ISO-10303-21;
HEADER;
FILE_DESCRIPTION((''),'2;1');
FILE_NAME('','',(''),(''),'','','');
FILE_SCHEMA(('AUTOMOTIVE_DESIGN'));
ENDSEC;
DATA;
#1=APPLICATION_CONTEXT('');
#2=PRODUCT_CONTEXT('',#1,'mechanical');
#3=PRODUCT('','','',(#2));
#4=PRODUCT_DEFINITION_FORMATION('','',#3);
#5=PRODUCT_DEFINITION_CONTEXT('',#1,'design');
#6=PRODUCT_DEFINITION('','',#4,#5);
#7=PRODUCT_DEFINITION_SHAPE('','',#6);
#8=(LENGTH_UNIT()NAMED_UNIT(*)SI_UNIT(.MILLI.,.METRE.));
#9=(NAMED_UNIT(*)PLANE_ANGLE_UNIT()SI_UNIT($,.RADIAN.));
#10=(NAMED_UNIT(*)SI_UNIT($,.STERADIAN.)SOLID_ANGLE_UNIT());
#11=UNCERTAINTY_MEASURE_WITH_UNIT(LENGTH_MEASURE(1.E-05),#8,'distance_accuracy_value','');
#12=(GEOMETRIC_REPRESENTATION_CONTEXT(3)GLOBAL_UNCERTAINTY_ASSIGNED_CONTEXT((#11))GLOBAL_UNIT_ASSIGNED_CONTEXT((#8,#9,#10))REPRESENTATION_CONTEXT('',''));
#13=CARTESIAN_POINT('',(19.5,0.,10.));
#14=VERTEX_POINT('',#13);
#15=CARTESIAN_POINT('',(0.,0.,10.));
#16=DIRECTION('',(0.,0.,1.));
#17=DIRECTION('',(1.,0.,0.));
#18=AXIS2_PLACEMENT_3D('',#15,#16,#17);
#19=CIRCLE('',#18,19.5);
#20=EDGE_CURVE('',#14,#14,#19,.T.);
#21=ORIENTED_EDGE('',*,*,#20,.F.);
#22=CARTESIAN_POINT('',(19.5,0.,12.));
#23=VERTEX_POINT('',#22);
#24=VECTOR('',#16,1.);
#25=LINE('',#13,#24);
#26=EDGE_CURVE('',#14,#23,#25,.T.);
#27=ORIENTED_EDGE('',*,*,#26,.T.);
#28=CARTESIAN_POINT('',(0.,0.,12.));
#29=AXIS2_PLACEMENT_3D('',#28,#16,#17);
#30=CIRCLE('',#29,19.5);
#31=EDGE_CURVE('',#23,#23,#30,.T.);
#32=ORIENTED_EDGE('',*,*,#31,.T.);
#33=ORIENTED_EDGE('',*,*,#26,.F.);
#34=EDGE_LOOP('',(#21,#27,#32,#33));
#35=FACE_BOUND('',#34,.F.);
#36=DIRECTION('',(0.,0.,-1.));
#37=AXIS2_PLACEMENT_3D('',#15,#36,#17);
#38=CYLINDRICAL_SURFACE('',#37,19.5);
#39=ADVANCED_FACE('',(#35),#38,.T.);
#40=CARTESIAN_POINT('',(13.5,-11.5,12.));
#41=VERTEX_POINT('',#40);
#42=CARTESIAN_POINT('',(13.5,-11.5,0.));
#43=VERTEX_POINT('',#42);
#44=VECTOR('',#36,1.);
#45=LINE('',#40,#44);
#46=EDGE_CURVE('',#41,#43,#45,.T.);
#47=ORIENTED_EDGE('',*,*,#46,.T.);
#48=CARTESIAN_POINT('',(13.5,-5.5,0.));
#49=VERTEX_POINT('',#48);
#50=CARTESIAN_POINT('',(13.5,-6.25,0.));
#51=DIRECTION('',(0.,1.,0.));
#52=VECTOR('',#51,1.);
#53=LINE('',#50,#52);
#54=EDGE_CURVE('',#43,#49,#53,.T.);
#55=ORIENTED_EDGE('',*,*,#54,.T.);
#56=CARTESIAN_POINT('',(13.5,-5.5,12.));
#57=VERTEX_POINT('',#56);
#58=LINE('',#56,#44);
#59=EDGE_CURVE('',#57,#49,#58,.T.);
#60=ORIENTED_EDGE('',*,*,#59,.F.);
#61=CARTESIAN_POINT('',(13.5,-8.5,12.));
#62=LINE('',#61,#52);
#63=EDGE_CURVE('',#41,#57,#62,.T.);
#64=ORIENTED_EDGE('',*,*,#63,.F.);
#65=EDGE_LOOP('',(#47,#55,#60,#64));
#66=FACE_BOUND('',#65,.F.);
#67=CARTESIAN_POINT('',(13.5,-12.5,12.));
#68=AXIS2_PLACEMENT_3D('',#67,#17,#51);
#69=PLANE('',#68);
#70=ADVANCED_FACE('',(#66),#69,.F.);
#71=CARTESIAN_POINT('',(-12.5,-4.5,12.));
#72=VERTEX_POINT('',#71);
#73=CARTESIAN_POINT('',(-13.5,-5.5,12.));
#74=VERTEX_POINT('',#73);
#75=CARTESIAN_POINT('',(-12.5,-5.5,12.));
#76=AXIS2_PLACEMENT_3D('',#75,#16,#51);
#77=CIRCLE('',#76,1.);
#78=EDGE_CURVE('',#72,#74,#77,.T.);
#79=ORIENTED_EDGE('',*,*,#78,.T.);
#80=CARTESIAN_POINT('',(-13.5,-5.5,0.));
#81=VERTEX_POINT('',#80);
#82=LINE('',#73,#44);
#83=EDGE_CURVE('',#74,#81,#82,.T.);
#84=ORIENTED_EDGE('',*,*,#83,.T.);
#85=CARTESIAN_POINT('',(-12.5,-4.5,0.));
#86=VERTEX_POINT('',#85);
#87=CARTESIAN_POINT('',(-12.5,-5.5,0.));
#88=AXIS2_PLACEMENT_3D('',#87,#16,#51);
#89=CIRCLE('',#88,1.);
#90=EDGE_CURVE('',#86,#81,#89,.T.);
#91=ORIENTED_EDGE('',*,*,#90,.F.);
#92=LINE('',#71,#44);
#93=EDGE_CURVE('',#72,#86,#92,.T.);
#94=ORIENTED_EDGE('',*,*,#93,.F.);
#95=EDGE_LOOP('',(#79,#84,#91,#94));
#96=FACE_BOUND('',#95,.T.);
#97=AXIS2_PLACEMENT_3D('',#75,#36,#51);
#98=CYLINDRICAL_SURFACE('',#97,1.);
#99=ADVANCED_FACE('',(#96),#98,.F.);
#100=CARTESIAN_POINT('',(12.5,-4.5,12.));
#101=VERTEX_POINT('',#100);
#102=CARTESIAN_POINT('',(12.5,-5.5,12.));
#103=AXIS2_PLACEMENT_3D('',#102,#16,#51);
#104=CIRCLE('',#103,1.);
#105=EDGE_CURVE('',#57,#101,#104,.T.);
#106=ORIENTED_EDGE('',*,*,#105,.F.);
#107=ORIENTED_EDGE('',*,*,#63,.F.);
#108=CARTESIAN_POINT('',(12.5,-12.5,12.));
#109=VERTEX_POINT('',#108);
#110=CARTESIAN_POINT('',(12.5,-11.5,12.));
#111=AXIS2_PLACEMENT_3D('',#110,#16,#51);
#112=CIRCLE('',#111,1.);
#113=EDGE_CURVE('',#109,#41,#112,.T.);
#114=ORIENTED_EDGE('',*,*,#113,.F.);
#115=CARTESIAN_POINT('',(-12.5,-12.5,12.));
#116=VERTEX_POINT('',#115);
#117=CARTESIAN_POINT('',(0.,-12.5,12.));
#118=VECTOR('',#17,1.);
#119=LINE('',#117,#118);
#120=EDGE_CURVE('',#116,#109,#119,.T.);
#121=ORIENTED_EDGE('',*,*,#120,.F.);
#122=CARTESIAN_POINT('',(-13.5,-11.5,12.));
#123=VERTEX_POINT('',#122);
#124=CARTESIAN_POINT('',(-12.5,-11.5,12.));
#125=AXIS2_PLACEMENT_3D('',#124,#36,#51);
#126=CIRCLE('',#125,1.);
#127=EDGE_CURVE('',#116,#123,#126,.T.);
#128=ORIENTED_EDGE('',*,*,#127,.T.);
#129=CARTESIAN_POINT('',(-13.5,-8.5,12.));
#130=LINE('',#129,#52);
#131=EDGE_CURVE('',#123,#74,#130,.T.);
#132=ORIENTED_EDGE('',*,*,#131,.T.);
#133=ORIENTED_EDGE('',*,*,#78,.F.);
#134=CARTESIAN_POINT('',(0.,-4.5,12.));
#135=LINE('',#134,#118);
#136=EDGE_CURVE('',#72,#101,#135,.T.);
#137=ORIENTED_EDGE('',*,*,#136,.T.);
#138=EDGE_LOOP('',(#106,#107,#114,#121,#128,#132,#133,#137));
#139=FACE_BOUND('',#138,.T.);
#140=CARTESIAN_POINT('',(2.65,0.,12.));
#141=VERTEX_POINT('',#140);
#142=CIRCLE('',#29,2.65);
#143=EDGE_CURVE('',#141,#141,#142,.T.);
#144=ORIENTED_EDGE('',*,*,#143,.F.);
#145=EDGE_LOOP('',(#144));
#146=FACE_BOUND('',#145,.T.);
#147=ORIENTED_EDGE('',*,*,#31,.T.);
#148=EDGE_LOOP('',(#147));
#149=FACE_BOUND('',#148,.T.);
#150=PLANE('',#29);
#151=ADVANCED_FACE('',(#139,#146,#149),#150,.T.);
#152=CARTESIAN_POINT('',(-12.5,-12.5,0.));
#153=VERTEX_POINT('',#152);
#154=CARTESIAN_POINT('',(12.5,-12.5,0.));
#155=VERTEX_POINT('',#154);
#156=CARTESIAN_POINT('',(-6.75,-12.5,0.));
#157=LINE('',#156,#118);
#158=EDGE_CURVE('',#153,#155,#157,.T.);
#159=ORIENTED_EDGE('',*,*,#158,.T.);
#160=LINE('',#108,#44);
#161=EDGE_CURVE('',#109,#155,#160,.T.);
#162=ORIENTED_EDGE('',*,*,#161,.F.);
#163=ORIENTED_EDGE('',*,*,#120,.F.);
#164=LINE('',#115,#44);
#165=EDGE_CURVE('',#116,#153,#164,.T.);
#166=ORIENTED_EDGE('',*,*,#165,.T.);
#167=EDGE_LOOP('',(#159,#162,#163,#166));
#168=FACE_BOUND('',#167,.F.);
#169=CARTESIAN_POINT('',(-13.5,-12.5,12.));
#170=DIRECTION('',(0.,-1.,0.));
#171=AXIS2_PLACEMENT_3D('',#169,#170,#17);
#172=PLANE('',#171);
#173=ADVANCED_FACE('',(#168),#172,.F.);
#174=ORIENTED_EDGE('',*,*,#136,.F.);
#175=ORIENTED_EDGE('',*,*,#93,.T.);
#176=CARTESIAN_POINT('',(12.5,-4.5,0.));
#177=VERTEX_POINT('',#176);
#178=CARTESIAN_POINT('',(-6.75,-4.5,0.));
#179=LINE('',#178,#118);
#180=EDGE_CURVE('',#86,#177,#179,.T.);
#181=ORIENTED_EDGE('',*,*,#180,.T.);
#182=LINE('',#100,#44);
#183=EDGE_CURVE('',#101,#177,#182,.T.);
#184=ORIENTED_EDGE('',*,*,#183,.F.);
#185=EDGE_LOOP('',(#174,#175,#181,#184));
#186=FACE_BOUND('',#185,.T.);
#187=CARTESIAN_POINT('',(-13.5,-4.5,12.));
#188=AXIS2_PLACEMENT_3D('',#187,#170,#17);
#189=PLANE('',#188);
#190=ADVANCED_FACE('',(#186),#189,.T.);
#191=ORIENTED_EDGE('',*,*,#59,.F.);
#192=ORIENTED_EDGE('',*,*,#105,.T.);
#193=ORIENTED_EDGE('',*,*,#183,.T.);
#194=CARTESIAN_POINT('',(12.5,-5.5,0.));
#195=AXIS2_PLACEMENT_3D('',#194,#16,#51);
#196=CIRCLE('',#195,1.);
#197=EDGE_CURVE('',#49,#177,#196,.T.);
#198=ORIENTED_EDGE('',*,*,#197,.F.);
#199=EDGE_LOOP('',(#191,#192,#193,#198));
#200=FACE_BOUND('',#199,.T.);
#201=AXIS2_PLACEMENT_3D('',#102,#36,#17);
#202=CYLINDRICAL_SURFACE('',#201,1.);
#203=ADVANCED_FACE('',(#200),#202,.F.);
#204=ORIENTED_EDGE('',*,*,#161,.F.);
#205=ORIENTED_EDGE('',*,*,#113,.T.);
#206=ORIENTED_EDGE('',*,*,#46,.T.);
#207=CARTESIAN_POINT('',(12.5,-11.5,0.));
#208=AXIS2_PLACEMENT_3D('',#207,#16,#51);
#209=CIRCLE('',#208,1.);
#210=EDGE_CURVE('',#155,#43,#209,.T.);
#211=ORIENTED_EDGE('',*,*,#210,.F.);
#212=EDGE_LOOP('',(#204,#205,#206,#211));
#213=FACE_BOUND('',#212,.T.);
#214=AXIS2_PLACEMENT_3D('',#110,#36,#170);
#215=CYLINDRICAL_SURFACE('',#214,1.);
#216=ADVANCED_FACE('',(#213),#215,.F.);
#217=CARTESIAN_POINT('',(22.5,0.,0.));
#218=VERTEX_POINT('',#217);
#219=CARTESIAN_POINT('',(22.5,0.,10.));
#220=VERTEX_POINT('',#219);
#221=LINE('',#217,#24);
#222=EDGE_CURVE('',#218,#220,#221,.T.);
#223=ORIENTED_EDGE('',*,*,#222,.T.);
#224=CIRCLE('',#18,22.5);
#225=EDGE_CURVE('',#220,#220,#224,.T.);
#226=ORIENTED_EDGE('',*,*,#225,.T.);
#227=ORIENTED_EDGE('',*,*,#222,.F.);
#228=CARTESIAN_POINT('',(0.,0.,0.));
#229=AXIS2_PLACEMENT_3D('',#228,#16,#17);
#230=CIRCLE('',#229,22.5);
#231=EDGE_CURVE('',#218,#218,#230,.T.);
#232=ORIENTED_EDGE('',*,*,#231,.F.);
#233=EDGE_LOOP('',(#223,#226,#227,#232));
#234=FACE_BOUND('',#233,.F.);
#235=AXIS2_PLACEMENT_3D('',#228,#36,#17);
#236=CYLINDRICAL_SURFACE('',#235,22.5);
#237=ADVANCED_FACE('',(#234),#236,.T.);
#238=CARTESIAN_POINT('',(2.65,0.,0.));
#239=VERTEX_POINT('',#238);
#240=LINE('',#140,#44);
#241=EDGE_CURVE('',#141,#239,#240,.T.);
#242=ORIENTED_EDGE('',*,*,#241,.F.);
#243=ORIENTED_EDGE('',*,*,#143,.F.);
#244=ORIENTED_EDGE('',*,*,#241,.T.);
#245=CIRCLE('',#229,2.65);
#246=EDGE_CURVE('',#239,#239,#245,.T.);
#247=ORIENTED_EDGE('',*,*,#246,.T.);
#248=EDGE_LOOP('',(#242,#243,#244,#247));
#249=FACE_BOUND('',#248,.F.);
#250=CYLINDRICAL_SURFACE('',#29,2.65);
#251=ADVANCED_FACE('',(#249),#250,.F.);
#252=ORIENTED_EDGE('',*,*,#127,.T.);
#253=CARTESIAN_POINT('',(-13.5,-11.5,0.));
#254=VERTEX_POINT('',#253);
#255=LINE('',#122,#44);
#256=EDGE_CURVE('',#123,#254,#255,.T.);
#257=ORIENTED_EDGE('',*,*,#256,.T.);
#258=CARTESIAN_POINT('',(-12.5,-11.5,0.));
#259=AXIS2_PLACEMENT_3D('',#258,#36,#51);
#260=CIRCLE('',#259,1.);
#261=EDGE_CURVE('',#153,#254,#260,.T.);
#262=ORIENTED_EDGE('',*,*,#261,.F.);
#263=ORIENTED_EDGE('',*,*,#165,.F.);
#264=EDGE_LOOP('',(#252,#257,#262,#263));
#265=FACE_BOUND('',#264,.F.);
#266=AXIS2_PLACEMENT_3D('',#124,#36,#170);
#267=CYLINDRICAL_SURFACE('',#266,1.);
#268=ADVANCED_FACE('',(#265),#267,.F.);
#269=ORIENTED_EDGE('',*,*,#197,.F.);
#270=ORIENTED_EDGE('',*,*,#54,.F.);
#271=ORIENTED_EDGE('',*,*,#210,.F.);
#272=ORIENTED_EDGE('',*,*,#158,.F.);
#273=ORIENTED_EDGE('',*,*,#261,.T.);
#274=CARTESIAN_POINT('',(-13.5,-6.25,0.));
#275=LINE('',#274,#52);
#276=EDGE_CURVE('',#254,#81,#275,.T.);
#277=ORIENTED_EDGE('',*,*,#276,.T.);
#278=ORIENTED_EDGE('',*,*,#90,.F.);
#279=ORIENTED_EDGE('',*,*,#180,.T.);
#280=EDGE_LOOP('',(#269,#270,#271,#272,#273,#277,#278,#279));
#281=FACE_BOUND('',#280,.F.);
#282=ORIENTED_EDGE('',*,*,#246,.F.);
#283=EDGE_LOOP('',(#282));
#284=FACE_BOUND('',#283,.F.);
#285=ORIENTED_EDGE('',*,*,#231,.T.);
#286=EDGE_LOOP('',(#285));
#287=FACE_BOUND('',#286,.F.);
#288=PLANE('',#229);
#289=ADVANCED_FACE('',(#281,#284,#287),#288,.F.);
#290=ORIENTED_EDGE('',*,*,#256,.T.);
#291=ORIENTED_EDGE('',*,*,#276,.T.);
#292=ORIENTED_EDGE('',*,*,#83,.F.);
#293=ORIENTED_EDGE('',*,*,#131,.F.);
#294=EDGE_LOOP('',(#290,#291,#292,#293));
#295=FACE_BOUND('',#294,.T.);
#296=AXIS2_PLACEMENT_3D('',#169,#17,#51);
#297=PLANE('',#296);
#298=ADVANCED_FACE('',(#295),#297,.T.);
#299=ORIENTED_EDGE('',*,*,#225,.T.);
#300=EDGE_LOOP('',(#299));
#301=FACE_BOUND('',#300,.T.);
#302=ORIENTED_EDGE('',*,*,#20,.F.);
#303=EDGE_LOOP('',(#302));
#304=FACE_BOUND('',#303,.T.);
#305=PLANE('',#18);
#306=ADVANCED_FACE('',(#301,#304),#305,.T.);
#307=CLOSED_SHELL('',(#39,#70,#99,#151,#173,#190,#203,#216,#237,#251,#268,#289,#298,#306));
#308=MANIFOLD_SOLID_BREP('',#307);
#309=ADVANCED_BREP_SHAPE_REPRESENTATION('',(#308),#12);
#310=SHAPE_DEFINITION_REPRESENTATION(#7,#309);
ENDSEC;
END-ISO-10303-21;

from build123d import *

# Parameters (mm, degrees)
F0_R     = 22.5
F1_DEPTH = 10
F3_R     = 19.5
F4_DEPTH = 2
F5_R     = 2.65
F5_W     = 27
F5_H     = 8
F6_DEPTH = 12.001
F8_R     = 1


with BuildPart() as f1:
    # F0 (on Top) → F1 (new body)
    with BuildSketch(Plane.XY):
        Circle(F0_R)
    extrude(amount=F1_DEPTH)

    # F3 (on face) → F4 (join)
    with BuildSketch(Plane.XY.offset(10)):
        Circle(F3_R)
    extrude(amount=F4_DEPTH)

    # F5 (on face) → F6 (cut, through all)
    with BuildSketch(Plane.XY.offset(12)):
        Circle(F5_R)
        with Locations((0, -8.5)):
            Rectangle(F5_W, F5_H)
    extrude(amount=-F6_DEPTH, mode=Mode.SUBTRACT)

    # F8
    f8_edges = [f1.edges().sort_by_distance(p)[0] for p in [
        (-13.5, -12.5, 6),
        (-13.5, -4.5, 6),
        (13.5, -4.5, 6),
        (13.5, -12.5, 6),
    ]]
    fillet(f8_edges, radius=F8_R)


solid = f1.part
